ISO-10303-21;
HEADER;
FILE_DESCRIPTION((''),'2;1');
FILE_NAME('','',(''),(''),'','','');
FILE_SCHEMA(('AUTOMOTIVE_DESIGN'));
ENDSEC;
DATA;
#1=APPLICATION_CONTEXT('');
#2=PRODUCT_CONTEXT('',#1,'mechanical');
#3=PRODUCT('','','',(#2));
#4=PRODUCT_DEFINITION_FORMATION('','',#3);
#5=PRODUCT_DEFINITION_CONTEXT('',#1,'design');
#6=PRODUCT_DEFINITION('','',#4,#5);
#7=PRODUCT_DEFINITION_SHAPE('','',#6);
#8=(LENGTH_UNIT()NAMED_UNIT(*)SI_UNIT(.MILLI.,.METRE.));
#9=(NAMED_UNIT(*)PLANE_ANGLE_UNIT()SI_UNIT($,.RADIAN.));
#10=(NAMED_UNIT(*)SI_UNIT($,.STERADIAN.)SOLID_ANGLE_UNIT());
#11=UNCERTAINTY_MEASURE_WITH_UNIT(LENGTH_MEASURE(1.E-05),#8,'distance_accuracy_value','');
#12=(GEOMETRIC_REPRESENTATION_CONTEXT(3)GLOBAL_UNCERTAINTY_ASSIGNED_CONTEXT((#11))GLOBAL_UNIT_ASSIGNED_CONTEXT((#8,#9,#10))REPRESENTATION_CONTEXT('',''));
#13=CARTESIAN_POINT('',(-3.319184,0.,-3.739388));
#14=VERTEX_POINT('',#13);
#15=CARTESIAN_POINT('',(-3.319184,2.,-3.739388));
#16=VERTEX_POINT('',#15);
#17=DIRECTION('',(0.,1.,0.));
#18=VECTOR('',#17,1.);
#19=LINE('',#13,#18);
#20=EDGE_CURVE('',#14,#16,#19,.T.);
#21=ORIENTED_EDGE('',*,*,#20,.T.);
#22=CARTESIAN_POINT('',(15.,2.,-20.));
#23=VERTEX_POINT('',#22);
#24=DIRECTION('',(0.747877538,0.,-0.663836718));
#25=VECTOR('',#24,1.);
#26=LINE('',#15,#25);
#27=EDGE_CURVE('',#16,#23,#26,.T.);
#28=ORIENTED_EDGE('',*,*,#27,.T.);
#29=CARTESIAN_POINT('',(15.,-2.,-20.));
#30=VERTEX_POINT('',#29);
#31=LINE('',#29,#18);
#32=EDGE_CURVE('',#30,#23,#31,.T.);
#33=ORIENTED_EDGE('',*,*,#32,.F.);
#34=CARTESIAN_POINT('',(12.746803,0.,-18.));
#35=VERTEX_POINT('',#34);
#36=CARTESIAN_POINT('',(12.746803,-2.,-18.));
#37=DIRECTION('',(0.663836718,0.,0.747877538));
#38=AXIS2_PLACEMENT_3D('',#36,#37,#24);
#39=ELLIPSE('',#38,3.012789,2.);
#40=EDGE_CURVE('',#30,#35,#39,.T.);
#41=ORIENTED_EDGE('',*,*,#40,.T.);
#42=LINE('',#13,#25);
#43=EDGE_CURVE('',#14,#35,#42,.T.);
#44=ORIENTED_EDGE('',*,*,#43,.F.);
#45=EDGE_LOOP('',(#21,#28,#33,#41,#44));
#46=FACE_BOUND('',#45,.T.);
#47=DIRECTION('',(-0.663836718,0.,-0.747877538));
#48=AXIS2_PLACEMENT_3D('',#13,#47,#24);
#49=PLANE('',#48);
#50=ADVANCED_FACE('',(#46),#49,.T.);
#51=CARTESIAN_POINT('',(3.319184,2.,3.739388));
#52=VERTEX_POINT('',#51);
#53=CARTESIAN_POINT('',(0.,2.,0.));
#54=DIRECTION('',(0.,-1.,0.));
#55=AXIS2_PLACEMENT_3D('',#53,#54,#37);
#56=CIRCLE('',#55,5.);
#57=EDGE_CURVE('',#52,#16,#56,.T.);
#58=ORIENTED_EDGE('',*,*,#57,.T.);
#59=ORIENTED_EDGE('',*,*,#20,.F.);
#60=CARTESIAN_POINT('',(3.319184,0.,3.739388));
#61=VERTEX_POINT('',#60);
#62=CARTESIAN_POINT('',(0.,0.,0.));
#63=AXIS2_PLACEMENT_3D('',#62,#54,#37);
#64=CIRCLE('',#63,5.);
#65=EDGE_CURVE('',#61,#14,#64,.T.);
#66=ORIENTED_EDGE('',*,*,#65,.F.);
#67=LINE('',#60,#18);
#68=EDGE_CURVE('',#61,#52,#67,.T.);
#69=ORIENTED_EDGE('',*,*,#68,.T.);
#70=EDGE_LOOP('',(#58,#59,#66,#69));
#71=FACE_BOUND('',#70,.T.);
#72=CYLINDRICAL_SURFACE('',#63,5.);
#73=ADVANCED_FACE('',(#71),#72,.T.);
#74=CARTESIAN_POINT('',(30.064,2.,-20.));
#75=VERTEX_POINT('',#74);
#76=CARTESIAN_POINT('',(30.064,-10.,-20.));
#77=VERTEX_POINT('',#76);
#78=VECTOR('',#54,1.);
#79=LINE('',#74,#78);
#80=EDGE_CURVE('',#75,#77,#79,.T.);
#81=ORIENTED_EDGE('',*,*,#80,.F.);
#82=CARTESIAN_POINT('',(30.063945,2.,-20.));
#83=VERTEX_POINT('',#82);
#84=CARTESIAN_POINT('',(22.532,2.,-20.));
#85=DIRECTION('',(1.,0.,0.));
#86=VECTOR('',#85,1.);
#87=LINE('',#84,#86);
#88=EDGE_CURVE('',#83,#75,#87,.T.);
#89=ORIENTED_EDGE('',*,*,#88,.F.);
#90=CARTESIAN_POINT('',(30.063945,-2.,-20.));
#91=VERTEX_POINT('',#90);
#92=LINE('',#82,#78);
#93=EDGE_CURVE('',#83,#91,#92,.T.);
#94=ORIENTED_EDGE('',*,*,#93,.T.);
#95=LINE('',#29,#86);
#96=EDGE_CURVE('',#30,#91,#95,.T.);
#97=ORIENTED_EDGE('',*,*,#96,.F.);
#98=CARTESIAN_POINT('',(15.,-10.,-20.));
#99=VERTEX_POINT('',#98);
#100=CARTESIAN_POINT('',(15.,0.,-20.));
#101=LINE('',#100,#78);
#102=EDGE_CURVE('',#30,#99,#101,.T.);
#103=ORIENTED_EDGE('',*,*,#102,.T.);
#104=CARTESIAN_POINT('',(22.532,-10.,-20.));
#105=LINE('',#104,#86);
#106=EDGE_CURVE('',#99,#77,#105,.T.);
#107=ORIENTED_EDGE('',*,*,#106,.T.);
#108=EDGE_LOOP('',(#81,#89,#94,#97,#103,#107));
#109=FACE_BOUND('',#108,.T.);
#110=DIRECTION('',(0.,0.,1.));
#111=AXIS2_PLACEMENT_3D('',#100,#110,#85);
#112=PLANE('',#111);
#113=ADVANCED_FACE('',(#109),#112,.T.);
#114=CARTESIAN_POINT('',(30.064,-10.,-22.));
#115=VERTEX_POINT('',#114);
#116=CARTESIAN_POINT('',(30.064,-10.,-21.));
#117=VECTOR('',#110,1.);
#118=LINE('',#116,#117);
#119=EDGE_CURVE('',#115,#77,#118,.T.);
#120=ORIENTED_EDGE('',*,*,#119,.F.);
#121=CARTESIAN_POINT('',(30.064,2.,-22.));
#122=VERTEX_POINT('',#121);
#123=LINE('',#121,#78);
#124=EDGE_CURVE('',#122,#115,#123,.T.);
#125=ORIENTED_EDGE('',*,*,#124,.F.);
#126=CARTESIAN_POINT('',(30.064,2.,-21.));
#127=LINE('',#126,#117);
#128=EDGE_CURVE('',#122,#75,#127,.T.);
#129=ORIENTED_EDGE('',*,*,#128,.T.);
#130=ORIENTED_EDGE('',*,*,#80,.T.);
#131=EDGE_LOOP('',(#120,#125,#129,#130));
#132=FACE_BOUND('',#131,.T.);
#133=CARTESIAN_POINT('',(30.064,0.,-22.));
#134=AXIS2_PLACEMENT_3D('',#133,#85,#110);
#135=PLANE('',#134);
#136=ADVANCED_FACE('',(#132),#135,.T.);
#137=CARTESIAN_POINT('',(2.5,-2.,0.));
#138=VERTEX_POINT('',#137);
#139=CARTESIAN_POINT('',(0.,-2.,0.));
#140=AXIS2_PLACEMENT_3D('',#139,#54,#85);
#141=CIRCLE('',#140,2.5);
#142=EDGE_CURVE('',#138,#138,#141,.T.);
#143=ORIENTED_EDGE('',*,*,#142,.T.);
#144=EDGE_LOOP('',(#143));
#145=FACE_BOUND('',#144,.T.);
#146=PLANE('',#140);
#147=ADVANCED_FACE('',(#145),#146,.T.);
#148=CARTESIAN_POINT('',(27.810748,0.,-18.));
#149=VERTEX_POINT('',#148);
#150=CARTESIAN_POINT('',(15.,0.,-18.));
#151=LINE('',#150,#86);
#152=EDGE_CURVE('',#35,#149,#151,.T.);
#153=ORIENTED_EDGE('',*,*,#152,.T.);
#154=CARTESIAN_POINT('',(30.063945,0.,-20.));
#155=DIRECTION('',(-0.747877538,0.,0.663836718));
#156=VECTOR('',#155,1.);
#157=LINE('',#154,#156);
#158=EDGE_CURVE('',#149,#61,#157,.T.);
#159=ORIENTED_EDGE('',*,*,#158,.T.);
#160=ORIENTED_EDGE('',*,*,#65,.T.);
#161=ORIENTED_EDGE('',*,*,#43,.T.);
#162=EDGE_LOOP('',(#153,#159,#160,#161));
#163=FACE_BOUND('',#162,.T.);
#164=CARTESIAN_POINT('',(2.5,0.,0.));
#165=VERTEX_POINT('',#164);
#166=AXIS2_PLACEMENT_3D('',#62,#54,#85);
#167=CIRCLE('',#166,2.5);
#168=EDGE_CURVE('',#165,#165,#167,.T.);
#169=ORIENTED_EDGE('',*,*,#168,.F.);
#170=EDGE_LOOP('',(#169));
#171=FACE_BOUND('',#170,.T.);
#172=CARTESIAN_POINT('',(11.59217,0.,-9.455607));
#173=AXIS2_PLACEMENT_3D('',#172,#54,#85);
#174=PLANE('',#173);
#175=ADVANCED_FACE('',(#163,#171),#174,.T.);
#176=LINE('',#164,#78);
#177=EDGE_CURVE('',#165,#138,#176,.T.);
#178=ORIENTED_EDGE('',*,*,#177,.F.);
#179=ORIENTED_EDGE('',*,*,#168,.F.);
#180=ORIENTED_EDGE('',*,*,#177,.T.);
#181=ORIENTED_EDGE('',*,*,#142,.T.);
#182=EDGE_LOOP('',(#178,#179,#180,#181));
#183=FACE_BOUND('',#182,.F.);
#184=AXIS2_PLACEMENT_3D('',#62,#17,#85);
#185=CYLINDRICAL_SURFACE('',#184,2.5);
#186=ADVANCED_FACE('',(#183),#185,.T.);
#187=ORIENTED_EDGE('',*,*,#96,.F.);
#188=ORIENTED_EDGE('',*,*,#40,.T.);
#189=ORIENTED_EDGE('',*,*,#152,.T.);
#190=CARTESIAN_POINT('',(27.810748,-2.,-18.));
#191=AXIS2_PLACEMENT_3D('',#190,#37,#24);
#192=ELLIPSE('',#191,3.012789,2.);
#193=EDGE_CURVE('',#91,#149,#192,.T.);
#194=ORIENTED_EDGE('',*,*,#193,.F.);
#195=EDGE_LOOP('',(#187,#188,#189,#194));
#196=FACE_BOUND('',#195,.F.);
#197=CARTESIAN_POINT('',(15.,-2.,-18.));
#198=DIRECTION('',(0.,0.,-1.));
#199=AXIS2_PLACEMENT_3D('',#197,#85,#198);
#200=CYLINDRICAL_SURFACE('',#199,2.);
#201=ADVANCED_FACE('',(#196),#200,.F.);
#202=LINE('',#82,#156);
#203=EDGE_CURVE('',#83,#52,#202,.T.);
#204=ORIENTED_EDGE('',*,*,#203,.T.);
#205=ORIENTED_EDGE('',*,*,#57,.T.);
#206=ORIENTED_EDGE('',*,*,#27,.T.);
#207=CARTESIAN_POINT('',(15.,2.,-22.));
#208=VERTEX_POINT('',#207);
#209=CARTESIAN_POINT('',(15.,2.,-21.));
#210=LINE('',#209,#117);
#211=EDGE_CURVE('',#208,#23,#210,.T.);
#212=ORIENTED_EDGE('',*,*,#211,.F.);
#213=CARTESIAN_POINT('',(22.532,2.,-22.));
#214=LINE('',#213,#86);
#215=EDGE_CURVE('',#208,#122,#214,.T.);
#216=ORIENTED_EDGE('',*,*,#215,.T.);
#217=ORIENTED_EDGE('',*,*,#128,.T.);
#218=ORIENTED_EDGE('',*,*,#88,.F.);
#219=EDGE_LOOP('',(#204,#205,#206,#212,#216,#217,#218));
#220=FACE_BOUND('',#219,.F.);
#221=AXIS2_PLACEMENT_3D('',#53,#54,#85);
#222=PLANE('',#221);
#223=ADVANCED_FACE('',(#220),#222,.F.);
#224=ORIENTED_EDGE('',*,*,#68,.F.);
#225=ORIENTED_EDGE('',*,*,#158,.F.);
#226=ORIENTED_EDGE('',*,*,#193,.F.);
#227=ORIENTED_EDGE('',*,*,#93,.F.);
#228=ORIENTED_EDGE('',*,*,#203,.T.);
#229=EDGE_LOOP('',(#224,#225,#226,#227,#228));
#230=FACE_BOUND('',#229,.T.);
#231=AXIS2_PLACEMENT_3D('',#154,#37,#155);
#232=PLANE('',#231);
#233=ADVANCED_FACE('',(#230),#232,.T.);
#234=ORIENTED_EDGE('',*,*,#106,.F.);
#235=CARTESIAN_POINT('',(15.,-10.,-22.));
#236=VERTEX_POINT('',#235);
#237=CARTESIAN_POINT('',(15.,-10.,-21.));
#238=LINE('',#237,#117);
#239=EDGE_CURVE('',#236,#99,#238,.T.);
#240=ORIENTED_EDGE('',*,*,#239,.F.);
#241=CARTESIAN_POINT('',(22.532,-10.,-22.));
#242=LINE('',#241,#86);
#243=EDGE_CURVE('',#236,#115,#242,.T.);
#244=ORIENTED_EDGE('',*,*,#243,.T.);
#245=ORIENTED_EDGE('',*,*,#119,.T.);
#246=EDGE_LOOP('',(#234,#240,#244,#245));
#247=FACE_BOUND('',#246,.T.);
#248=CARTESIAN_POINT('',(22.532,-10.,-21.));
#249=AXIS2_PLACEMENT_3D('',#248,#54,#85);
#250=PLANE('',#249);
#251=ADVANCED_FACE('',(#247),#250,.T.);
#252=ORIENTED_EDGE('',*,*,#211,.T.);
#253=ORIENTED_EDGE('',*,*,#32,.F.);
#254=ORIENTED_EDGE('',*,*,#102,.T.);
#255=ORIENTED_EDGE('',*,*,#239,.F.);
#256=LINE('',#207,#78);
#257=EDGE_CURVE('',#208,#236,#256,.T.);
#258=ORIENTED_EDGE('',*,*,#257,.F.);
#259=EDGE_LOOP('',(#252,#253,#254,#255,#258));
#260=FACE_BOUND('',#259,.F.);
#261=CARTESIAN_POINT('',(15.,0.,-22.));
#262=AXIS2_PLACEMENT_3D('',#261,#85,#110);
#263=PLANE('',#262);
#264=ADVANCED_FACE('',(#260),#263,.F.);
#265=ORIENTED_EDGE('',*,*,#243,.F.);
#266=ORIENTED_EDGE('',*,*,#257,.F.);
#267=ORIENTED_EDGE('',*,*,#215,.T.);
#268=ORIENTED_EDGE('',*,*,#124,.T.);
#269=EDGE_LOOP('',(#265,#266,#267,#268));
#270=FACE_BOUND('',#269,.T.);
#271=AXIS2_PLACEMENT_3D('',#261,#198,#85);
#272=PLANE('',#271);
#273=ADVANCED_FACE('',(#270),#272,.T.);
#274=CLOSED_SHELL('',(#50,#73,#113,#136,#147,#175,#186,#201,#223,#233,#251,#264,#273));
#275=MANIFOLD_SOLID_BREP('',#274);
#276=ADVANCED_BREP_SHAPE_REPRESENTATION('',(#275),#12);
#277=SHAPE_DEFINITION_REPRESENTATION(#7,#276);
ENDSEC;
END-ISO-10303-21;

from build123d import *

# Parameters (mm, degrees)
F0_R          = 2.5
F1_DEPTH      = 2
F0_W          = 15.064
F0_H          = 2
F2_DEPTH      = 10
F2_DEPTH_BACK = 2
F3_DEPTH      = 2
F3_DEPTH_BACK = 2
F4_R          = 2


# Not quite as in the source:
# - ends of sketch curves that miss each other by under 0.0002 mm in the source are joined


with BuildPart() as f1:
    # F0 (on Front) → F1 (new body)
    with BuildSketch(Plane.XZ):
        with BuildLine():
            Line((30.0639452948, -20), (3.3191835885, 3.7393876913))
            ThreePointArc((3.3191835885, 3.7393876913), (-3.7393876913, 3.3191835885), (-3.3191835885, -3.7393876913))
            Line((-3.3191835885, -3.7393876913), (15, -20))
            Line((15, -20), (30.0639452948, -20))
        make_face()
        Circle(F0_R, mode=Mode.SUBTRACT)
    extrude(amount=-F1_DEPTH)

    # F0 (on Front) → F2 (join, two sides)
    with BuildSketch(Plane.XZ) as f2_sk:
        with Locations((22.532, -21)):
            Rectangle(F0_W, F0_H)
    extrude(amount=F2_DEPTH)
    extrude(f2_sk.sketch, amount=-F2_DEPTH_BACK)

    # F0 (on Front) → F3 (join, two sides)
    with BuildSketch(Plane.XZ) as f3_sk:
        Circle(F0_R)
    extrude(amount=F3_DEPTH)
    extrude(f3_sk.sketch, amount=-F3_DEPTH_BACK)

    # F4
    f4_edges = [f1.edges().sort_by_distance(p)[0] for p in [
        (22.531973, 0, -20),
    ]]
    fillet(f4_edges, radius=F4_R)


solid = f1.part
